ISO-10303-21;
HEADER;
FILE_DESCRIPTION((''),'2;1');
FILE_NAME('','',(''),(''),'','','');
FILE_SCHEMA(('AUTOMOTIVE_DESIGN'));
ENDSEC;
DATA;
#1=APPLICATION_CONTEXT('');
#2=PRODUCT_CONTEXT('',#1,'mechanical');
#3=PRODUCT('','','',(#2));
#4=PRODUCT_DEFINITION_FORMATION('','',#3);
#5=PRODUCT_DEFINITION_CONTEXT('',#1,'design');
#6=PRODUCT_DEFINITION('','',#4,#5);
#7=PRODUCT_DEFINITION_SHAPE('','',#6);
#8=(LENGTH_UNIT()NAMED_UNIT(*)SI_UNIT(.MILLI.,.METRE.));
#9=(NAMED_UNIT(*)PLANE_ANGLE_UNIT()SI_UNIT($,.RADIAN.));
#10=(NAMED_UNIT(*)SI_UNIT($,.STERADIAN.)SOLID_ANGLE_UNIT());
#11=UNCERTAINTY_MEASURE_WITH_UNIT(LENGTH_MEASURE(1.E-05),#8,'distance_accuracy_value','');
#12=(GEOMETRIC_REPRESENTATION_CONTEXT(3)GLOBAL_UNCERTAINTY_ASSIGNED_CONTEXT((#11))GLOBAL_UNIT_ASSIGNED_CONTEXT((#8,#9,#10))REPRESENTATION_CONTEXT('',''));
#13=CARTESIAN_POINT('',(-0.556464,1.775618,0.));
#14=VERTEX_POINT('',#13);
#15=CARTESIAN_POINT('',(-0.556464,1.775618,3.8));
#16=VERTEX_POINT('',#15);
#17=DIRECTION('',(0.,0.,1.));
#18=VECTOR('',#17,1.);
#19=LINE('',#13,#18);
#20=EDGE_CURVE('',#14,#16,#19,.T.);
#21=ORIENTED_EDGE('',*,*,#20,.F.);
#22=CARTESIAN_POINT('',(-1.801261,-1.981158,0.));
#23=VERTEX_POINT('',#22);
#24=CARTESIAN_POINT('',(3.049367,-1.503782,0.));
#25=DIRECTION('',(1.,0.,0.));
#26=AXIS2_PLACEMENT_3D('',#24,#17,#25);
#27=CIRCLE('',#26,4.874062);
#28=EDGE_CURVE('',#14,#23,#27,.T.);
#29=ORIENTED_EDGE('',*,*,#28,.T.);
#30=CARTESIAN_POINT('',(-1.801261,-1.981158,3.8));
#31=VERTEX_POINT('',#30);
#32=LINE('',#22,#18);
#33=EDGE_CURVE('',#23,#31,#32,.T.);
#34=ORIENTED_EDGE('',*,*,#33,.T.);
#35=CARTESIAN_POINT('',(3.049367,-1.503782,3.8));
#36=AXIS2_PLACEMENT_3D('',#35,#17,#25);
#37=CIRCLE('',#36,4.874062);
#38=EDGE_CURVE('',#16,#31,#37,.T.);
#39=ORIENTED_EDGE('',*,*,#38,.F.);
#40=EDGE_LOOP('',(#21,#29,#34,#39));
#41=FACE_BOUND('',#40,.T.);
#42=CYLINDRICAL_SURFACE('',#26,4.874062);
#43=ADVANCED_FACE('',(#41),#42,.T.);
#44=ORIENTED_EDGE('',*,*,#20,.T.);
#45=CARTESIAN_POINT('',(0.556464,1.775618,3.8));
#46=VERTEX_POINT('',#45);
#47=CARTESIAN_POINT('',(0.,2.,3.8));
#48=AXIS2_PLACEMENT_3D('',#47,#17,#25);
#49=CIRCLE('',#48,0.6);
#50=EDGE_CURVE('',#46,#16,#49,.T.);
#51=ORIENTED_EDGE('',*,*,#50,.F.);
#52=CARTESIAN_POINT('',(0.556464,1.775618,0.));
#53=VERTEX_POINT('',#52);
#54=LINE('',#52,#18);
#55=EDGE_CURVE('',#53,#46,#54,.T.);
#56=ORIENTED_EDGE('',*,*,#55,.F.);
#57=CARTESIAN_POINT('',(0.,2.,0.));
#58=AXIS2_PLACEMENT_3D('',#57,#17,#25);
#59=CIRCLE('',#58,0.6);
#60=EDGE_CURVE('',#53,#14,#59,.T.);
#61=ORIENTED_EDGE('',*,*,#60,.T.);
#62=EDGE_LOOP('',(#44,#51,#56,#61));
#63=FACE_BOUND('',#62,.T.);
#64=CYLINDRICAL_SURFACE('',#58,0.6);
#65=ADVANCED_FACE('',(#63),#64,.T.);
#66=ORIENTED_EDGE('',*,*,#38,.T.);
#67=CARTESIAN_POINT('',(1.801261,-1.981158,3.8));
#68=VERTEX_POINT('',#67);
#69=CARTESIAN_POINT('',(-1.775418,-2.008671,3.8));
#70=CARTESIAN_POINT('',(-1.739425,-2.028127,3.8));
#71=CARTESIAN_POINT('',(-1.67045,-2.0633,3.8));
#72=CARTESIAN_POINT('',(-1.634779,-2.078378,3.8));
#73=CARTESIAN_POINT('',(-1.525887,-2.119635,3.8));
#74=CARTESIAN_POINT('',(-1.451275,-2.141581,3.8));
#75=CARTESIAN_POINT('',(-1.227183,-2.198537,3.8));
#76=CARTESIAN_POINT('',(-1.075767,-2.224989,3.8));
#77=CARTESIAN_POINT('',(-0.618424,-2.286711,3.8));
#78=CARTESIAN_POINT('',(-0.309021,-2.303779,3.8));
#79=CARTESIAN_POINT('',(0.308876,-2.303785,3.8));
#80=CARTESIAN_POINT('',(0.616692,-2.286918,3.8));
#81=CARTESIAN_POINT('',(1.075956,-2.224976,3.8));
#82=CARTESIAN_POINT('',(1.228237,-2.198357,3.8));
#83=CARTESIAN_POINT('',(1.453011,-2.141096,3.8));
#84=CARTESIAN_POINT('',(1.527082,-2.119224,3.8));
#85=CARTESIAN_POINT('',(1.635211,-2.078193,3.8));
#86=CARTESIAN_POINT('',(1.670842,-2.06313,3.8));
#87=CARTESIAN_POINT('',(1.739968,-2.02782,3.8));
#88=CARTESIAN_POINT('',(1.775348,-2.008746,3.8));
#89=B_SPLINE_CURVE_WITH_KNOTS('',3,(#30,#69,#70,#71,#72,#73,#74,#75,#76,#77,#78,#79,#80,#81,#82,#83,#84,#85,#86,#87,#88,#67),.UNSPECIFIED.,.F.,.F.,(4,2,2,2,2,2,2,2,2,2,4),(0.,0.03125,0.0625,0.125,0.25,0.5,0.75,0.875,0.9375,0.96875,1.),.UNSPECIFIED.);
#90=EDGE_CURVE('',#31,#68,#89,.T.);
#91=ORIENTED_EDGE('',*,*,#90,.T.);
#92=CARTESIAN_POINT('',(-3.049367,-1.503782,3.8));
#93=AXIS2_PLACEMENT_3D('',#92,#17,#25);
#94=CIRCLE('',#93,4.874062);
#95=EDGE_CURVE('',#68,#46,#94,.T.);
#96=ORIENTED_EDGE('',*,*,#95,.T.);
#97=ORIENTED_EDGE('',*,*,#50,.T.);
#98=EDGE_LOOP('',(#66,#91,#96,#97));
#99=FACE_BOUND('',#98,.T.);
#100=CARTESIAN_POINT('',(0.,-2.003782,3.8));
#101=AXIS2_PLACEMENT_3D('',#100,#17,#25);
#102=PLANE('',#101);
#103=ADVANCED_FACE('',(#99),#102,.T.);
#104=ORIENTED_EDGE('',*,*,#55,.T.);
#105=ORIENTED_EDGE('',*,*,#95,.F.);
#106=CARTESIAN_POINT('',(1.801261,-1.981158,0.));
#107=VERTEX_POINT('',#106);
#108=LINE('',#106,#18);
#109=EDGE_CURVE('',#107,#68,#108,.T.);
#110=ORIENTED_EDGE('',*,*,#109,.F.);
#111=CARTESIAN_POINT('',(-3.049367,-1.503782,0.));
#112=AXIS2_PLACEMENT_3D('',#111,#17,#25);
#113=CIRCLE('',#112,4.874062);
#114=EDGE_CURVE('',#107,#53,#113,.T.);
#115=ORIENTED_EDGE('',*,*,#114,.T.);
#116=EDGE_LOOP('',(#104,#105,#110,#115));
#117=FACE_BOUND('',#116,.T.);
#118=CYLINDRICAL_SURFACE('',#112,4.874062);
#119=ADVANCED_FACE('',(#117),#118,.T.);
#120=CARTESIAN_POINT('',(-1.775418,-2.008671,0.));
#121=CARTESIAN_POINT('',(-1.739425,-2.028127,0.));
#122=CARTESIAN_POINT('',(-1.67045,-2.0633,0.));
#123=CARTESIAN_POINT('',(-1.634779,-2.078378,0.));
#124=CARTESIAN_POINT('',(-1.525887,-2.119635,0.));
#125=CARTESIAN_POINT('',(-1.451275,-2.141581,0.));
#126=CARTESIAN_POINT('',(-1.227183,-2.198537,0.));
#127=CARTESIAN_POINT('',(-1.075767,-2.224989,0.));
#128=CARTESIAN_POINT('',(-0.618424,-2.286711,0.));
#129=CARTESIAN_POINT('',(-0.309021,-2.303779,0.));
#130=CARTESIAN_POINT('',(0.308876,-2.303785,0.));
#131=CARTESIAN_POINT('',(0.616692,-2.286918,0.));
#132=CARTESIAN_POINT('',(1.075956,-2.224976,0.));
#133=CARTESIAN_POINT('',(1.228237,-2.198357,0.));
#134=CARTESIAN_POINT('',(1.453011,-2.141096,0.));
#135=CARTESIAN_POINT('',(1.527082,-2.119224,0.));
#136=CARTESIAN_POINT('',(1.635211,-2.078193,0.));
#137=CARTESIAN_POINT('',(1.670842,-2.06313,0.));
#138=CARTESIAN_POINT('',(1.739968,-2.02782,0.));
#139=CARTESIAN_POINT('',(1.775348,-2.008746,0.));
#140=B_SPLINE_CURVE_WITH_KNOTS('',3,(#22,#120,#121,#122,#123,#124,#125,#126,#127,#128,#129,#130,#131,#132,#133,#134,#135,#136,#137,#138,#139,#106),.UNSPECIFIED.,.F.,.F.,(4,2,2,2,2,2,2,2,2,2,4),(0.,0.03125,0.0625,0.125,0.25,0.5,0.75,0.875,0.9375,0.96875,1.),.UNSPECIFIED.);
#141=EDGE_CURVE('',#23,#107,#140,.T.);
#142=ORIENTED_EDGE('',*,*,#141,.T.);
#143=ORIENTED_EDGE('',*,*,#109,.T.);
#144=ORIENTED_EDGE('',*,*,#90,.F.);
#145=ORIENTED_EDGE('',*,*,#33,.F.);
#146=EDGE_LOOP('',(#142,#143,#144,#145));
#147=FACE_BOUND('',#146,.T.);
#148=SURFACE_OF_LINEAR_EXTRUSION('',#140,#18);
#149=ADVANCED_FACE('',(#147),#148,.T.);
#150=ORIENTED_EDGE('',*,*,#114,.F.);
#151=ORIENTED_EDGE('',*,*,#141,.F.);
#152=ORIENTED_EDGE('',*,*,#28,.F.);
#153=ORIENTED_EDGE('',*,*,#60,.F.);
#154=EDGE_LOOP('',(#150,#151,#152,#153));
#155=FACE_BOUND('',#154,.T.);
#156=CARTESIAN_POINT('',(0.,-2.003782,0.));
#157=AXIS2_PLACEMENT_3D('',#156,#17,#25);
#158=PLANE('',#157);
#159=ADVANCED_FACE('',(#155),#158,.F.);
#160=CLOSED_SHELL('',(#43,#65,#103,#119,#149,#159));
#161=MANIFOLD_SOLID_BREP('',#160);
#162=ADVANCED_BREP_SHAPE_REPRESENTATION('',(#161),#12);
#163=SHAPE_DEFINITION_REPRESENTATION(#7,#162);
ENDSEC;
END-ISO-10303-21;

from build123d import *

# Parameters (mm, degrees)
EXTRUDE_1_DEPTH     = 3.8
CUT_EXTRUDE_START   = -3.8
CUT_EXTRUDE_1_DEPTH = 3.8


# Read off the part's stored shape, not the designer's step: Вырез-Вытянуть-Тонкостенный1
with BuildPart() as part:
    # Эскиз1 → Бобышка-Вытянуть1 (new body)
    with BuildSketch(Plane.XY):
        with BuildLine():
            ThreePointArc((-0.780530418, 1.824579743), (-1.785343213, 0.036245206), (-2, -2.003782154))
            add(Edge.make_bspline(
                [(-2, -2.003782154), (-2, -2.503782154), (0, -2.503782154), (2, -2.503782154), (2, -2.003782154)],
                knots=[3.141592654, 3.141592654, 3.141592654, 4.71238898, 4.71238898, 6.283185307, 6.283185307, 6.283185307], degree=2, weights=[1, 0.707106781, 1, 0.707106781, 1]))
            ThreePointArc((2, -2.003782154), (1.785343213, 0.036245206), (0.780530418, 1.824579743))
            ThreePointArc((0.780530418, 1.824579743), (0, 2.8), (-0.780530418, 1.824579743))
        make_face()
    extrude(amount=EXTRUDE_1_DEPTH)

    # Вырез-Вытянуть-Тонкостенный1 outline → Вырез-Вытянуть-Тонкостенный1 (cut)
    with BuildSketch(Plane.XY.offset(3.8).offset(CUT_EXTRUDE_START)):
        with BuildLine():
            ThreePointArc((-0.780530418, 1.824579743), (-1.785343213, 0.036245206), (-2, -2.003782154))
            add(Edge.make_bspline(
                [(-2, -2.003782154), (-2, -2.503782154), (0, -2.503782154), (2, -2.503782154), (2, -2.003782154)],
                knots=[3.141592654, 3.141592654, 3.141592654, 4.71238898, 4.71238898, 6.283185307, 6.283185307, 6.283185307], degree=2, weights=[1, 0.707106781, 1, 0.707106781, 1]))
            ThreePointArc((2, -2.003782154), (1.785343213, 0.036245206), (0.780530418, 1.824579743))
            ThreePointArc((0.780530418, 1.824579743), (0, 2.8), (-0.780530418, 1.824579743))
        make_face()
        with BuildLine():
            add(Edge.make_bspline(
                [(-1.801261293, -1.98115767), (-1.775418362, -2.008670603), (-1.739425369, -2.028127074), (-1.670449757, -2.063299705), (-1.634778536, -2.078378197), (-1.525887333, -2.119634895), (-1.451274856, -2.141581404), (-1.227183168, -2.19853734), (-1.075766919, -2.224988673), (-0.618423536, -2.286710762), (-0.309020677, -2.303779282), (0.308875657, -2.303785026), (0.616691935, -2.286918168), (1.075956117, -2.224976253), (1.228236922, -2.198356993), (1.453011363, -2.141095645), (1.527081769, -2.119224419), (1.635211184, -2.078192937), (1.670841705, -2.063129566), (1.739968072, -2.027820204), (1.77534781, -2.008745714), (1.801261293, -1.98115767)],
                knots=[0, 0, 0, 0, 0.03125, 0.03125, 0.0625, 0.0625, 0.125, 0.125, 0.25, 0.25, 0.5, 0.5, 0.75, 0.75, 0.875, 0.875, 0.9375, 0.9375, 0.96875, 0.96875, 1, 1, 1, 1], degree=3))
            ThreePointArc((-1.801261293, -1.98115767), (-1.577323761, 0.029258889), (-0.55646432, 1.775617603))
            ThreePointArc((-0.55646432, 1.775617603), (0, 2.6), (0.55646432, 1.775617603))
            ThreePointArc((0.55646432, 1.775617603), (1.577323761, 0.029258889), (1.801261293, -1.98115767))
        make_face(mode=Mode.SUBTRACT)
    extrude(amount=CUT_EXTRUDE_1_DEPTH, mode=Mode.SUBTRACT)


solid = part.part
